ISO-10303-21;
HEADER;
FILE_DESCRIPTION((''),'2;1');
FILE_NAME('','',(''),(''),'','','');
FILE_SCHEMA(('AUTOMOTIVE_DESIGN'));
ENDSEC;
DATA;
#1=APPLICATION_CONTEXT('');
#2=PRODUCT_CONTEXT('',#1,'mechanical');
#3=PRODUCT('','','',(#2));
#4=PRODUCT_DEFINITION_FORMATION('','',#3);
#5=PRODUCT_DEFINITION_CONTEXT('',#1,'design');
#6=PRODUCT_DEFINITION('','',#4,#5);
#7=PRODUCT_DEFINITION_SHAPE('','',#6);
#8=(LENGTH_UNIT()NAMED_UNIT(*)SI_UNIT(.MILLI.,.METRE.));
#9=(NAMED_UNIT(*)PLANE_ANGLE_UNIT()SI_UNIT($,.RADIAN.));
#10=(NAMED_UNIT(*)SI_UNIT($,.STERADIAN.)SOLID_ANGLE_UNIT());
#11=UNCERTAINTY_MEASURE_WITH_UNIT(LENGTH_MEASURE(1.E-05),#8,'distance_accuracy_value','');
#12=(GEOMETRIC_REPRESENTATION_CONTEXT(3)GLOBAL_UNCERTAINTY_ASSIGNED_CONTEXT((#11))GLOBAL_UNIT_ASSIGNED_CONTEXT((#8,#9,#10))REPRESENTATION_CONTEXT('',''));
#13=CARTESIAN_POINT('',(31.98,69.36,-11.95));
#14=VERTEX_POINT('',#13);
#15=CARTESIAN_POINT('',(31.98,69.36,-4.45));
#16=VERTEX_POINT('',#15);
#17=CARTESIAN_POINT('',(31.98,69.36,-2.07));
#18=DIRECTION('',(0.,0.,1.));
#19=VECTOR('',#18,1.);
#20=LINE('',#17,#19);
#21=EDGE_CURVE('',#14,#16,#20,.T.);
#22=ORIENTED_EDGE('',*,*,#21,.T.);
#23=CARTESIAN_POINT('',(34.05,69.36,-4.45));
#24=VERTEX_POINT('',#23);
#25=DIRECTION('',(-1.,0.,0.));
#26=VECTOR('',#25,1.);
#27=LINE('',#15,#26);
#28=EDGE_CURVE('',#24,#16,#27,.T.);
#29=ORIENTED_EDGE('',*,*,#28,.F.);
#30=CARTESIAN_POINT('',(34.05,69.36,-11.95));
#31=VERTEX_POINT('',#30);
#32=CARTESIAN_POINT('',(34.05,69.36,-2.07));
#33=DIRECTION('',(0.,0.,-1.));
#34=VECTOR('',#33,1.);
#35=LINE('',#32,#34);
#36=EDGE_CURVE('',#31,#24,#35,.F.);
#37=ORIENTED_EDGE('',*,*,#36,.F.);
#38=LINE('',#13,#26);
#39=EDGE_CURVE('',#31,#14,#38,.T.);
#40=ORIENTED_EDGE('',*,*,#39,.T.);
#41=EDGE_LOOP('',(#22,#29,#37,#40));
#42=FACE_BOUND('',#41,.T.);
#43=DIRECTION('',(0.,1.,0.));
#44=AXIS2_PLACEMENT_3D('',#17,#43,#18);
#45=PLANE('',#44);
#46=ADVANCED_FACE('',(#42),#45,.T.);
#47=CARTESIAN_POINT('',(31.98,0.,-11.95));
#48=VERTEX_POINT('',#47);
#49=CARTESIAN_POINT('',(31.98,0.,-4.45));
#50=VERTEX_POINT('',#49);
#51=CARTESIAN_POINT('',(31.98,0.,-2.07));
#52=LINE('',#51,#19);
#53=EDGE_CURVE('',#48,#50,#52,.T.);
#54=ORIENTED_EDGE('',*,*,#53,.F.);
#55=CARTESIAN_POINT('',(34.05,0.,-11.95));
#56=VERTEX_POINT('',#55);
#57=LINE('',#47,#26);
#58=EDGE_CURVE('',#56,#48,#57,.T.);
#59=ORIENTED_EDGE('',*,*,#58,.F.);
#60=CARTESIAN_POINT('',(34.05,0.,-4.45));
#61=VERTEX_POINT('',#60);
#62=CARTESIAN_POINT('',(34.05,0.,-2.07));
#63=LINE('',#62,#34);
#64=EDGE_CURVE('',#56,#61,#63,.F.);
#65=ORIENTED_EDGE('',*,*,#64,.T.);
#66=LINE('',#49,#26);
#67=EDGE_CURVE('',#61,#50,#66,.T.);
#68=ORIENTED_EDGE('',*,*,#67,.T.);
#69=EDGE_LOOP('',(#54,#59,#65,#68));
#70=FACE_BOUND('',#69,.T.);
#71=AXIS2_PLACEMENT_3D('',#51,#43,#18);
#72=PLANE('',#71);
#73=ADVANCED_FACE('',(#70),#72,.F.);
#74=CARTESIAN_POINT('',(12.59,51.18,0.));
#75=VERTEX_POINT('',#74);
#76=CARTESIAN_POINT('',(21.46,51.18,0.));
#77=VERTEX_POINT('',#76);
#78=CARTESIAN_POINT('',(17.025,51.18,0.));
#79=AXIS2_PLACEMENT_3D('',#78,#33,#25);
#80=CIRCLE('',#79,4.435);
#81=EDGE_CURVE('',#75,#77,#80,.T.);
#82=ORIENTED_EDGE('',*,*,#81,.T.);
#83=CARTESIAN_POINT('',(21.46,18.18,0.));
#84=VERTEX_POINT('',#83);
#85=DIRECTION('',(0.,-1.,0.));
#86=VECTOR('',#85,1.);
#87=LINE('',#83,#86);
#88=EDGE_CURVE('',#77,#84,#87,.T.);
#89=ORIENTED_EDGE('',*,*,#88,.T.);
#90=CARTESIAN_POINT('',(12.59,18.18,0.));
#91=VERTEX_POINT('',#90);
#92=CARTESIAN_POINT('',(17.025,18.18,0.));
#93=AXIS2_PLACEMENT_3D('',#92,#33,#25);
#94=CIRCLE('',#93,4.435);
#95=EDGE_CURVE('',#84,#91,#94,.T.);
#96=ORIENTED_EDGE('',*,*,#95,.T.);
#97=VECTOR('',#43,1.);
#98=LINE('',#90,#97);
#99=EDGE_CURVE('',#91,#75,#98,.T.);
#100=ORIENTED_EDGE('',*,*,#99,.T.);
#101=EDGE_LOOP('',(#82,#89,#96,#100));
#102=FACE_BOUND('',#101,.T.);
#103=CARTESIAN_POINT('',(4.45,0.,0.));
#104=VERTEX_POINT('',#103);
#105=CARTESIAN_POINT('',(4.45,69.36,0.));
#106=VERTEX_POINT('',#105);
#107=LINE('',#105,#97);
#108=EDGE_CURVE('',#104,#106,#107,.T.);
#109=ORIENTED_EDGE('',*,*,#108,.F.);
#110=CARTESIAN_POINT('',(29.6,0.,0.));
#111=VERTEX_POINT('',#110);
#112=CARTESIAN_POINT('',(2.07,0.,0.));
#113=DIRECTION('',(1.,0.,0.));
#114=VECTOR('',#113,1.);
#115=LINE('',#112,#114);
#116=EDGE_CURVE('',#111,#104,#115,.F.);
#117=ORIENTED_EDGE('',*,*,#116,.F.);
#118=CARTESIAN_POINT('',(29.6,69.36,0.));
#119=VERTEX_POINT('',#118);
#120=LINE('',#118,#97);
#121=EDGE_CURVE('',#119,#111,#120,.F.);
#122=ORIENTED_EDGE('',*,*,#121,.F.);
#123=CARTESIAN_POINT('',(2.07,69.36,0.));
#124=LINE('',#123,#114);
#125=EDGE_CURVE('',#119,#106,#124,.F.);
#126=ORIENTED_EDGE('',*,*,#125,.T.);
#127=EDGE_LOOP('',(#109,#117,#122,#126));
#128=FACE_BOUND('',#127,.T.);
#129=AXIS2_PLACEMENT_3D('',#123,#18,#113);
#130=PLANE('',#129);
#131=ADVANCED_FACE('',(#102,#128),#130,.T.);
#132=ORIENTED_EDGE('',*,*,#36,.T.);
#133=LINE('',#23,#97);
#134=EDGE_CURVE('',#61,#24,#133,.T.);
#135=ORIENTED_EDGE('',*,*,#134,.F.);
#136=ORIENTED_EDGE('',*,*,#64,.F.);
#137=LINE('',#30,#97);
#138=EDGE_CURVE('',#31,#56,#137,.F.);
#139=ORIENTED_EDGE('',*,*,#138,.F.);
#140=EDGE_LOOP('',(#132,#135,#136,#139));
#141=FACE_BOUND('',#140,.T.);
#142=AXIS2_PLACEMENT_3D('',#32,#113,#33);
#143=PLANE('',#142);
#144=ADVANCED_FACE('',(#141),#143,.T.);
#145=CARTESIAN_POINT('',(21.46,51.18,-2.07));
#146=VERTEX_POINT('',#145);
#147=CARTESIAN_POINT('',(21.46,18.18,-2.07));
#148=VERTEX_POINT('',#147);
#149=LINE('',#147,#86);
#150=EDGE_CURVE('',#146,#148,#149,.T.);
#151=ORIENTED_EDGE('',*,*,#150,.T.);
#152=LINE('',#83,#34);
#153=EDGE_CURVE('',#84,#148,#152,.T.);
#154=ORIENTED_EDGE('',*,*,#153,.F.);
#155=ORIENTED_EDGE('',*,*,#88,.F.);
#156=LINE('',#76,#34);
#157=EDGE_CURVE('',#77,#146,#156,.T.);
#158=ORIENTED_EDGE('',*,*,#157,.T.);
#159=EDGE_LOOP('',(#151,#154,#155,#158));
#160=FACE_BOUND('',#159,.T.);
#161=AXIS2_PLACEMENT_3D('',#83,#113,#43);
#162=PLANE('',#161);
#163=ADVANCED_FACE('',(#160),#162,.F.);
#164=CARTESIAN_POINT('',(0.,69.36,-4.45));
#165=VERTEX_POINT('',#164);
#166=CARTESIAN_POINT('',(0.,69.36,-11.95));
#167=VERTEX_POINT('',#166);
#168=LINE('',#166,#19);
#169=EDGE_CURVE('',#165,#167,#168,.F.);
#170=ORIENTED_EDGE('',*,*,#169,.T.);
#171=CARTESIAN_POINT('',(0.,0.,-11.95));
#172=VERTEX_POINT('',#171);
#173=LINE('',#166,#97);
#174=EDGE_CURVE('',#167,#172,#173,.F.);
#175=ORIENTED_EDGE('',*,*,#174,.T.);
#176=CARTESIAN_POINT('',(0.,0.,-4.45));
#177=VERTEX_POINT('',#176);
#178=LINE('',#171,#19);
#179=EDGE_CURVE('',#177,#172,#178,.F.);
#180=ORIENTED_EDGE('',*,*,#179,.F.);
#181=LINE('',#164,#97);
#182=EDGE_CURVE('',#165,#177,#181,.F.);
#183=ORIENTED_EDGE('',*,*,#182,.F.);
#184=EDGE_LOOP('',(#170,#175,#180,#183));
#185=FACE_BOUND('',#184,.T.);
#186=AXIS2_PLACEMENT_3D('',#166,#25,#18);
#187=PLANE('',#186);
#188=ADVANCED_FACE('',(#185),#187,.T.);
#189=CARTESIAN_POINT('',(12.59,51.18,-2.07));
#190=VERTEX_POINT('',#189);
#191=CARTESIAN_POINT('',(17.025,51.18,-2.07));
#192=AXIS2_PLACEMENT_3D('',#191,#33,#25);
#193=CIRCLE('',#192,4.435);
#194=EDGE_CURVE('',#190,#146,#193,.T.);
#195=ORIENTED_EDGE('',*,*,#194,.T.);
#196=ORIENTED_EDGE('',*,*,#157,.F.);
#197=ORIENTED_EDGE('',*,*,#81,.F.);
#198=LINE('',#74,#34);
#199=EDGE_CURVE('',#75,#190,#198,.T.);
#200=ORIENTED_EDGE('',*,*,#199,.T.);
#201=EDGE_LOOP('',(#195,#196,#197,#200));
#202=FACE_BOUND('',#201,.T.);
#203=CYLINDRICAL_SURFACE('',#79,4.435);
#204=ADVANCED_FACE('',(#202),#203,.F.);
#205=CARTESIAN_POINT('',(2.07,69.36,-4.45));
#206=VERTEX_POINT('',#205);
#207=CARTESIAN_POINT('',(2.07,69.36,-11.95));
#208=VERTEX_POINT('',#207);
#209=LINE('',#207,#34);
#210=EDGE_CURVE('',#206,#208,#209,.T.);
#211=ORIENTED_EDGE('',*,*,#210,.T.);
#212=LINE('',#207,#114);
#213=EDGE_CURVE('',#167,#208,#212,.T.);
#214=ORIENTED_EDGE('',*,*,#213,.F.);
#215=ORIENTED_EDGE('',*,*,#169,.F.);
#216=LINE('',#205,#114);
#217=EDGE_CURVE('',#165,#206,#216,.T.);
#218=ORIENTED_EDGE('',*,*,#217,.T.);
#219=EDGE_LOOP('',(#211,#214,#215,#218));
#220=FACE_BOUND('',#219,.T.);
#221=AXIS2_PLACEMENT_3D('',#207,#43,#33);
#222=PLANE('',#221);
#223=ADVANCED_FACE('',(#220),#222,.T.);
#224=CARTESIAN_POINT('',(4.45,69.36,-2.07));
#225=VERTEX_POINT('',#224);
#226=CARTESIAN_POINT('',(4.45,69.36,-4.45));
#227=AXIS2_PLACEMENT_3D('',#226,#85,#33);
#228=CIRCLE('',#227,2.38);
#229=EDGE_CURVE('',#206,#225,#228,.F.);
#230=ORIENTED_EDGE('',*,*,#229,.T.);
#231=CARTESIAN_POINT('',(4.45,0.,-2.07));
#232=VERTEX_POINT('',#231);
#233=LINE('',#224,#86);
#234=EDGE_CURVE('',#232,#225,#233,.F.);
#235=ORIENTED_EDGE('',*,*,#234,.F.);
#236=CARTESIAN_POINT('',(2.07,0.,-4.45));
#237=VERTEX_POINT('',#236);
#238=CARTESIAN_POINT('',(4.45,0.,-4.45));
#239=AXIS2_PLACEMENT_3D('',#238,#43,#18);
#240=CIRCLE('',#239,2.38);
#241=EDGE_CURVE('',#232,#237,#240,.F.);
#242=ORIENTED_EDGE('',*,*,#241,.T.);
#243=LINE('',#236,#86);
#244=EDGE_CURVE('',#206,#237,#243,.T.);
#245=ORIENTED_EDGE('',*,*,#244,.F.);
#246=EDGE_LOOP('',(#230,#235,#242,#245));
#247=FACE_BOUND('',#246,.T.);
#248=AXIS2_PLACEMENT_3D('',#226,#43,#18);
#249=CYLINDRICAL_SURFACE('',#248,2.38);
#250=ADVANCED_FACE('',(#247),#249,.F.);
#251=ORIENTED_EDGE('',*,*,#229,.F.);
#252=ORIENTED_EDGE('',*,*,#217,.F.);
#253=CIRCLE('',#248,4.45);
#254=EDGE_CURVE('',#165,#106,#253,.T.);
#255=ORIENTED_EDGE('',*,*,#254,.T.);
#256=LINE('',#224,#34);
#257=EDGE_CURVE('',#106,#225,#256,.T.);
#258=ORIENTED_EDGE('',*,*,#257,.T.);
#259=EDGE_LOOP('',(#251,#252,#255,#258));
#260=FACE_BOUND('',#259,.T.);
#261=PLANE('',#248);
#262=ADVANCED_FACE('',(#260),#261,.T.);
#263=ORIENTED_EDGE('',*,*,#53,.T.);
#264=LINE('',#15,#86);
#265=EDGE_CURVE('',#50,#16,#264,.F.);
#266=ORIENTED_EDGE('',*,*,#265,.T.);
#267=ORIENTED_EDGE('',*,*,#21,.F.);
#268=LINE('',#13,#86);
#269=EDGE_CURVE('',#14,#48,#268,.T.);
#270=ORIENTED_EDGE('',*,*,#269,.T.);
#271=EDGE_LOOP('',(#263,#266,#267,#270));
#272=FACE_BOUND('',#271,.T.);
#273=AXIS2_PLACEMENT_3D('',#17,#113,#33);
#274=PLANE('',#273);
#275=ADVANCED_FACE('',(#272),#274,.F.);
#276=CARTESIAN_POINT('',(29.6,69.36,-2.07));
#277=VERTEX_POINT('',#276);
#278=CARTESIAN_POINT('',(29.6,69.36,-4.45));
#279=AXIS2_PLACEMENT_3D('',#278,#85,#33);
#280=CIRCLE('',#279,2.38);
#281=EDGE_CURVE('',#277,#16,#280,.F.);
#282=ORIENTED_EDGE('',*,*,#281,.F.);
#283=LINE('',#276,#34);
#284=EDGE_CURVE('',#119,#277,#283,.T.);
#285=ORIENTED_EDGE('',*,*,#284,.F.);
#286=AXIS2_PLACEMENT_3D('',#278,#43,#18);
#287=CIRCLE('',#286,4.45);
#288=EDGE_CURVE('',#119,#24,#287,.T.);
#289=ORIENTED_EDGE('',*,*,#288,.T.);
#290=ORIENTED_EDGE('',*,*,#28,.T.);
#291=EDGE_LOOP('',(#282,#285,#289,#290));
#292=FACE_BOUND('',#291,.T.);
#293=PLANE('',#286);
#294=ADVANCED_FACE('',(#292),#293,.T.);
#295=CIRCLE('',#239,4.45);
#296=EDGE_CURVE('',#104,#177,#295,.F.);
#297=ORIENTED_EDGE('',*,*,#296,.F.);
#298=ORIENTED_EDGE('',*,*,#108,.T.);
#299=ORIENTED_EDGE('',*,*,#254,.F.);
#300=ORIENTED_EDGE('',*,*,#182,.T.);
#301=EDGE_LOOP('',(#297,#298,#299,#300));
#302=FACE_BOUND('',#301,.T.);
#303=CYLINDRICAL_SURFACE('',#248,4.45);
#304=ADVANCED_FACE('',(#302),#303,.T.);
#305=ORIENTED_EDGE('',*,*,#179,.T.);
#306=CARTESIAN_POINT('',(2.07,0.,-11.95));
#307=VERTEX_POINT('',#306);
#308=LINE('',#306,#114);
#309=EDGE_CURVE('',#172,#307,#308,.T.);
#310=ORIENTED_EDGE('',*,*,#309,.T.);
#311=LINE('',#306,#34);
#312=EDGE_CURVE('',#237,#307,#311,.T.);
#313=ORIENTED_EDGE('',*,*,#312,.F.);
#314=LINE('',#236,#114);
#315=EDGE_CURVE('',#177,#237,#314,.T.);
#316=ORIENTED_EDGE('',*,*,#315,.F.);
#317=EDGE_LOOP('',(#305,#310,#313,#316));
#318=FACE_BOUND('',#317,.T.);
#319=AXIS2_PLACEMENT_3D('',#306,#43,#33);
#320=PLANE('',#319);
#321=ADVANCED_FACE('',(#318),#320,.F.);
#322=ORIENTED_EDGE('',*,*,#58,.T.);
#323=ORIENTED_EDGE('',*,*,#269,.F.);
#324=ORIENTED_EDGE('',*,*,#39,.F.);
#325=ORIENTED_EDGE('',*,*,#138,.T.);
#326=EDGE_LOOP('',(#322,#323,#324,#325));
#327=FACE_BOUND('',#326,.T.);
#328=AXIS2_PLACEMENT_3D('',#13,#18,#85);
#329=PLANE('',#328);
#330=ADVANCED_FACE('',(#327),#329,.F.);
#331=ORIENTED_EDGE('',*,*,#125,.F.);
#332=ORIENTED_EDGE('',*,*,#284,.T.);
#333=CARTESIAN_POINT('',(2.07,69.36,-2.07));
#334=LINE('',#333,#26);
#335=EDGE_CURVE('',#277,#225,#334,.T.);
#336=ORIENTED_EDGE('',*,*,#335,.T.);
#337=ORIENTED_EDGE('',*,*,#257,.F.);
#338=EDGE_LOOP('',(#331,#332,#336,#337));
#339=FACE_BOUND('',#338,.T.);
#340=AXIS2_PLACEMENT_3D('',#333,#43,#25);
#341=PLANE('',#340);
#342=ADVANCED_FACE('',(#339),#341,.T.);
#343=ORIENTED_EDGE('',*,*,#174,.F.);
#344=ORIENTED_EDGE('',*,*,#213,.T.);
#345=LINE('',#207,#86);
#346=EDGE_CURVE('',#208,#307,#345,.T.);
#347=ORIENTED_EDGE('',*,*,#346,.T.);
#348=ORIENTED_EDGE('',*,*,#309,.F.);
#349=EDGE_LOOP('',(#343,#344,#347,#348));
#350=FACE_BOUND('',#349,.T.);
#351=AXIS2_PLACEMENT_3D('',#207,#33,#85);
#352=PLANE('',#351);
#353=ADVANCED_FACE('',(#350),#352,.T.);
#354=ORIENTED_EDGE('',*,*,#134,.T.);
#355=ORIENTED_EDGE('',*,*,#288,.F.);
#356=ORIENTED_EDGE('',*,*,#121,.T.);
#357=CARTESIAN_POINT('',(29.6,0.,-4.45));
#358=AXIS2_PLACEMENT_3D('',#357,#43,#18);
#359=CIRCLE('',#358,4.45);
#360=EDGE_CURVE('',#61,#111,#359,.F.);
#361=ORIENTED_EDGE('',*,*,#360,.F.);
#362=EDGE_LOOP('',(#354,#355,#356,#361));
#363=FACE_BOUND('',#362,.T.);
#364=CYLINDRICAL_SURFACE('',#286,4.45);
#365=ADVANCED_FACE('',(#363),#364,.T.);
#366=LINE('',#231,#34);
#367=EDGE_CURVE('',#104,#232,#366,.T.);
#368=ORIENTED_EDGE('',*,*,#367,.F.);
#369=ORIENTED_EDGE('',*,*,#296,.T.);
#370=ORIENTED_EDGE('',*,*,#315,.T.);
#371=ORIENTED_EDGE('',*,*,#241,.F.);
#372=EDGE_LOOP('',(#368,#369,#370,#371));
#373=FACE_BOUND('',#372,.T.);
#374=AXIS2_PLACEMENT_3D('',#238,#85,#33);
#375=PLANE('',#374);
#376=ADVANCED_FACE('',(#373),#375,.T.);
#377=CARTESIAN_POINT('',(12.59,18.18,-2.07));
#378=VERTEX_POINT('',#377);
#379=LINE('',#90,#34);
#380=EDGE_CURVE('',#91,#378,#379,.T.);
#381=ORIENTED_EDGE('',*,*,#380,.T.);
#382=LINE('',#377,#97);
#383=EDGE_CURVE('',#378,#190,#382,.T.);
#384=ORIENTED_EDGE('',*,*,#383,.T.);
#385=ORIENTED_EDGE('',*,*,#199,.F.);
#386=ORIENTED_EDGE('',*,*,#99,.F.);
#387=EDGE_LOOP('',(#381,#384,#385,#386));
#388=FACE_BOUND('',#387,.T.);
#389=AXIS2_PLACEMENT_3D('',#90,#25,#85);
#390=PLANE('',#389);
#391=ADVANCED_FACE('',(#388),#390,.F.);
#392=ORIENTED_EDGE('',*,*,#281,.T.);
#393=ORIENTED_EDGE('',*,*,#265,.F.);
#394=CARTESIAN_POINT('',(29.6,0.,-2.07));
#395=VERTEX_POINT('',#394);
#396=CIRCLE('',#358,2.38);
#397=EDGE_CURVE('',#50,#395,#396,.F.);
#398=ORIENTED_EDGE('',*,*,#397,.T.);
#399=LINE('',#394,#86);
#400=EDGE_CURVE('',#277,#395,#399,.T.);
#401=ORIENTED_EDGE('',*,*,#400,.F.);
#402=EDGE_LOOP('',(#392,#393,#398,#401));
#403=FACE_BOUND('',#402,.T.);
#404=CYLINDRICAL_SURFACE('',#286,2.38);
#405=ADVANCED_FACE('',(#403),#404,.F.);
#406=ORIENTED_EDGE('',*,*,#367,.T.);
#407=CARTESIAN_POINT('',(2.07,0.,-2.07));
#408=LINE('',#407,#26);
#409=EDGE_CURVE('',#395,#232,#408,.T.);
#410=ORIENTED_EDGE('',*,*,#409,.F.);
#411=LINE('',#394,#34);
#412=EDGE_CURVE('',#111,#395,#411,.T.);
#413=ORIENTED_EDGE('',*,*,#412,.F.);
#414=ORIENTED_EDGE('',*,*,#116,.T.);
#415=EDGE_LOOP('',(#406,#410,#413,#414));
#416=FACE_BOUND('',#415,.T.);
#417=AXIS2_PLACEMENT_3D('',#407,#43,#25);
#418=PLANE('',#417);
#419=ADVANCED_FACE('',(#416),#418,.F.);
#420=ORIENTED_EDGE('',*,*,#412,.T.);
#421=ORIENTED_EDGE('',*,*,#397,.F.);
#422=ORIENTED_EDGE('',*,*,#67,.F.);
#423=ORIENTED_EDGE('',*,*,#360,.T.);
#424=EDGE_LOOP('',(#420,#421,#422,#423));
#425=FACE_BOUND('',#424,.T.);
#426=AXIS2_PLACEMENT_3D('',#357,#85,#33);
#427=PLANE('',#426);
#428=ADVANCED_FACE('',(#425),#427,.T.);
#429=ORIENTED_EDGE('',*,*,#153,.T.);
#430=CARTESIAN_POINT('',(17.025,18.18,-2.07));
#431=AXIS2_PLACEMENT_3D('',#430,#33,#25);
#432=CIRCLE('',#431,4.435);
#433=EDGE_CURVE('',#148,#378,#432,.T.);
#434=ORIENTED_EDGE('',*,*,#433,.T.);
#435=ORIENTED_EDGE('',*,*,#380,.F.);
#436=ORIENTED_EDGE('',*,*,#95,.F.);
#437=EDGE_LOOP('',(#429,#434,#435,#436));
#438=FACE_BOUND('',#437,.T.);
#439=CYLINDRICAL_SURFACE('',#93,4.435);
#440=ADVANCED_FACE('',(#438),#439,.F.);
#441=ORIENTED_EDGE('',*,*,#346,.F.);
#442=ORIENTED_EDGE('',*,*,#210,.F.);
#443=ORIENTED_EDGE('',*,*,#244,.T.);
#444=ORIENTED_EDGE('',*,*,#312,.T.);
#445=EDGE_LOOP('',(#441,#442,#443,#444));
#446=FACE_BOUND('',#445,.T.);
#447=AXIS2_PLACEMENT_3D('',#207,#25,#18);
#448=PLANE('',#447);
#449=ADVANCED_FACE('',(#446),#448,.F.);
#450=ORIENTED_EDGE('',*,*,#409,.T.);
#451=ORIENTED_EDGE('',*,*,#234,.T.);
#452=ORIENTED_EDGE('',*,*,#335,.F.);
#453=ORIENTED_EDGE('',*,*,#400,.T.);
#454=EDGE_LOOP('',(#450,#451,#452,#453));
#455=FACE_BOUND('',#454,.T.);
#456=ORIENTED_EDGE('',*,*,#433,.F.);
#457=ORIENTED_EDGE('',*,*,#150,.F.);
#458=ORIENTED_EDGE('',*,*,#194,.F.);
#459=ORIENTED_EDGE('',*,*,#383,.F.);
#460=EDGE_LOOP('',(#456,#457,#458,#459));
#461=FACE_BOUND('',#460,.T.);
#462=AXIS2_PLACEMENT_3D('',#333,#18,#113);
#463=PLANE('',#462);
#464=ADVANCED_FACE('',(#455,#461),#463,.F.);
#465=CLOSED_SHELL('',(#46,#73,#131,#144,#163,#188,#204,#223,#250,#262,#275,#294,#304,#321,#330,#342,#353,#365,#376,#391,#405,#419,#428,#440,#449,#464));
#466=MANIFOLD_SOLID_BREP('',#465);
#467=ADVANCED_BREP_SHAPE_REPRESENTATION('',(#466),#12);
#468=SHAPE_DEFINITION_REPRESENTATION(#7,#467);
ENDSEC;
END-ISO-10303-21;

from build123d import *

# Parameters (mm, degrees)
BOSS_EXTRUDE1_DEPTH    = 69.36
CONVERT_SOLID2_DEPTH   = 69.36
CONVERT_SOLID2_2_DEPTH = 69.36
CUT_EXTRUDE1_DEPTH     = 78.896254724


# Read off the part's stored shape, not the designer's step: Convert-Solid2
with BuildPart() as part:
    # Sketch2 → Boss-Extrude1 (new body)
    with BuildSketch(Plane(origin=(0, 0, 0), x_dir=(1, 0, 0), z_dir=(0, 1, 0))):
        Polygon((0, 11.95), (0, 0), (34.05, 0), (34.05, 11.95), (31.98, 11.95), (31.98, 2.07), (2.07, 2.07), (2.07, 11.95), align=None)
    extrude(amount=BOSS_EXTRUDE1_DEPTH)

    # Convert-Solid2 outline → Convert-Solid2 (cut)
    with BuildSketch(Plane(origin=(0, 0, 0), x_dir=(1, 0, 0), z_dir=(0, 1, 0))):
        with BuildLine():
            ThreePointArc((34.05, 4.450000066), (32.746625157, 1.303374843), (29.599999934, 0))
            Line((29.599999934, 0), (34.05, 0))
            Line((34.05, 0), (34.05, 4.450000066))
        make_face()
        with BuildLine():
            Line((0, 0), (4.450000066, 0))
            ThreePointArc((4.450000066, 0), (1.303374843, 1.303374843), (0, 4.450000066))
            Line((0, 4.450000066), (0, 0))
        make_face()
    extrude(amount=CONVERT_SOLID2_DEPTH, mode=Mode.SUBTRACT)

    # Convert-Solid2 2 outline → Convert-Solid2 2 (add)
    with BuildSketch(Plane(origin=(0, 0, 0), x_dir=(1, 0, 0), z_dir=(0, 1, 0))):
        with BuildLine():
            Line((2.07, 2.07), (4.450000066, 2.07))
            ThreePointArc((4.450000066, 2.07), (2.76708588, 2.76708588), (2.07, 4.450000066))
            Line((2.07, 4.450000066), (2.07, 2.07))
        make_face()
        with BuildLine():
            ThreePointArc((31.98, 4.450000066), (31.28291412, 2.76708588), (29.599999934, 2.07))
            Line((29.599999934, 2.07), (31.98, 2.07))
            Line((31.98, 2.07), (31.98, 4.450000066))
        make_face()
    extrude(amount=CONVERT_SOLID2_2_DEPTH)

    # Sketch12 → Cut-Extrude1 (cut, through all)
    with BuildSketch(Plane(origin=(0, 0, -2.07), x_dir=(-1, 0, 0), z_dir=(0, 0, -1))):
        with BuildLine():
            Line((-21.46, 18.18), (-21.46, 51.18))
            ThreePointArc((-21.46, 51.18), (-17.025, 55.615), (-12.59, 51.18))
            Line((-12.59, 51.18), (-12.59, 18.18))
            ThreePointArc((-12.59, 18.18), (-17.025, 13.745), (-21.46, 18.18))
        make_face()
    extrude(amount=-CUT_EXTRUDE1_DEPTH, mode=Mode.SUBTRACT)


solid = part.part
